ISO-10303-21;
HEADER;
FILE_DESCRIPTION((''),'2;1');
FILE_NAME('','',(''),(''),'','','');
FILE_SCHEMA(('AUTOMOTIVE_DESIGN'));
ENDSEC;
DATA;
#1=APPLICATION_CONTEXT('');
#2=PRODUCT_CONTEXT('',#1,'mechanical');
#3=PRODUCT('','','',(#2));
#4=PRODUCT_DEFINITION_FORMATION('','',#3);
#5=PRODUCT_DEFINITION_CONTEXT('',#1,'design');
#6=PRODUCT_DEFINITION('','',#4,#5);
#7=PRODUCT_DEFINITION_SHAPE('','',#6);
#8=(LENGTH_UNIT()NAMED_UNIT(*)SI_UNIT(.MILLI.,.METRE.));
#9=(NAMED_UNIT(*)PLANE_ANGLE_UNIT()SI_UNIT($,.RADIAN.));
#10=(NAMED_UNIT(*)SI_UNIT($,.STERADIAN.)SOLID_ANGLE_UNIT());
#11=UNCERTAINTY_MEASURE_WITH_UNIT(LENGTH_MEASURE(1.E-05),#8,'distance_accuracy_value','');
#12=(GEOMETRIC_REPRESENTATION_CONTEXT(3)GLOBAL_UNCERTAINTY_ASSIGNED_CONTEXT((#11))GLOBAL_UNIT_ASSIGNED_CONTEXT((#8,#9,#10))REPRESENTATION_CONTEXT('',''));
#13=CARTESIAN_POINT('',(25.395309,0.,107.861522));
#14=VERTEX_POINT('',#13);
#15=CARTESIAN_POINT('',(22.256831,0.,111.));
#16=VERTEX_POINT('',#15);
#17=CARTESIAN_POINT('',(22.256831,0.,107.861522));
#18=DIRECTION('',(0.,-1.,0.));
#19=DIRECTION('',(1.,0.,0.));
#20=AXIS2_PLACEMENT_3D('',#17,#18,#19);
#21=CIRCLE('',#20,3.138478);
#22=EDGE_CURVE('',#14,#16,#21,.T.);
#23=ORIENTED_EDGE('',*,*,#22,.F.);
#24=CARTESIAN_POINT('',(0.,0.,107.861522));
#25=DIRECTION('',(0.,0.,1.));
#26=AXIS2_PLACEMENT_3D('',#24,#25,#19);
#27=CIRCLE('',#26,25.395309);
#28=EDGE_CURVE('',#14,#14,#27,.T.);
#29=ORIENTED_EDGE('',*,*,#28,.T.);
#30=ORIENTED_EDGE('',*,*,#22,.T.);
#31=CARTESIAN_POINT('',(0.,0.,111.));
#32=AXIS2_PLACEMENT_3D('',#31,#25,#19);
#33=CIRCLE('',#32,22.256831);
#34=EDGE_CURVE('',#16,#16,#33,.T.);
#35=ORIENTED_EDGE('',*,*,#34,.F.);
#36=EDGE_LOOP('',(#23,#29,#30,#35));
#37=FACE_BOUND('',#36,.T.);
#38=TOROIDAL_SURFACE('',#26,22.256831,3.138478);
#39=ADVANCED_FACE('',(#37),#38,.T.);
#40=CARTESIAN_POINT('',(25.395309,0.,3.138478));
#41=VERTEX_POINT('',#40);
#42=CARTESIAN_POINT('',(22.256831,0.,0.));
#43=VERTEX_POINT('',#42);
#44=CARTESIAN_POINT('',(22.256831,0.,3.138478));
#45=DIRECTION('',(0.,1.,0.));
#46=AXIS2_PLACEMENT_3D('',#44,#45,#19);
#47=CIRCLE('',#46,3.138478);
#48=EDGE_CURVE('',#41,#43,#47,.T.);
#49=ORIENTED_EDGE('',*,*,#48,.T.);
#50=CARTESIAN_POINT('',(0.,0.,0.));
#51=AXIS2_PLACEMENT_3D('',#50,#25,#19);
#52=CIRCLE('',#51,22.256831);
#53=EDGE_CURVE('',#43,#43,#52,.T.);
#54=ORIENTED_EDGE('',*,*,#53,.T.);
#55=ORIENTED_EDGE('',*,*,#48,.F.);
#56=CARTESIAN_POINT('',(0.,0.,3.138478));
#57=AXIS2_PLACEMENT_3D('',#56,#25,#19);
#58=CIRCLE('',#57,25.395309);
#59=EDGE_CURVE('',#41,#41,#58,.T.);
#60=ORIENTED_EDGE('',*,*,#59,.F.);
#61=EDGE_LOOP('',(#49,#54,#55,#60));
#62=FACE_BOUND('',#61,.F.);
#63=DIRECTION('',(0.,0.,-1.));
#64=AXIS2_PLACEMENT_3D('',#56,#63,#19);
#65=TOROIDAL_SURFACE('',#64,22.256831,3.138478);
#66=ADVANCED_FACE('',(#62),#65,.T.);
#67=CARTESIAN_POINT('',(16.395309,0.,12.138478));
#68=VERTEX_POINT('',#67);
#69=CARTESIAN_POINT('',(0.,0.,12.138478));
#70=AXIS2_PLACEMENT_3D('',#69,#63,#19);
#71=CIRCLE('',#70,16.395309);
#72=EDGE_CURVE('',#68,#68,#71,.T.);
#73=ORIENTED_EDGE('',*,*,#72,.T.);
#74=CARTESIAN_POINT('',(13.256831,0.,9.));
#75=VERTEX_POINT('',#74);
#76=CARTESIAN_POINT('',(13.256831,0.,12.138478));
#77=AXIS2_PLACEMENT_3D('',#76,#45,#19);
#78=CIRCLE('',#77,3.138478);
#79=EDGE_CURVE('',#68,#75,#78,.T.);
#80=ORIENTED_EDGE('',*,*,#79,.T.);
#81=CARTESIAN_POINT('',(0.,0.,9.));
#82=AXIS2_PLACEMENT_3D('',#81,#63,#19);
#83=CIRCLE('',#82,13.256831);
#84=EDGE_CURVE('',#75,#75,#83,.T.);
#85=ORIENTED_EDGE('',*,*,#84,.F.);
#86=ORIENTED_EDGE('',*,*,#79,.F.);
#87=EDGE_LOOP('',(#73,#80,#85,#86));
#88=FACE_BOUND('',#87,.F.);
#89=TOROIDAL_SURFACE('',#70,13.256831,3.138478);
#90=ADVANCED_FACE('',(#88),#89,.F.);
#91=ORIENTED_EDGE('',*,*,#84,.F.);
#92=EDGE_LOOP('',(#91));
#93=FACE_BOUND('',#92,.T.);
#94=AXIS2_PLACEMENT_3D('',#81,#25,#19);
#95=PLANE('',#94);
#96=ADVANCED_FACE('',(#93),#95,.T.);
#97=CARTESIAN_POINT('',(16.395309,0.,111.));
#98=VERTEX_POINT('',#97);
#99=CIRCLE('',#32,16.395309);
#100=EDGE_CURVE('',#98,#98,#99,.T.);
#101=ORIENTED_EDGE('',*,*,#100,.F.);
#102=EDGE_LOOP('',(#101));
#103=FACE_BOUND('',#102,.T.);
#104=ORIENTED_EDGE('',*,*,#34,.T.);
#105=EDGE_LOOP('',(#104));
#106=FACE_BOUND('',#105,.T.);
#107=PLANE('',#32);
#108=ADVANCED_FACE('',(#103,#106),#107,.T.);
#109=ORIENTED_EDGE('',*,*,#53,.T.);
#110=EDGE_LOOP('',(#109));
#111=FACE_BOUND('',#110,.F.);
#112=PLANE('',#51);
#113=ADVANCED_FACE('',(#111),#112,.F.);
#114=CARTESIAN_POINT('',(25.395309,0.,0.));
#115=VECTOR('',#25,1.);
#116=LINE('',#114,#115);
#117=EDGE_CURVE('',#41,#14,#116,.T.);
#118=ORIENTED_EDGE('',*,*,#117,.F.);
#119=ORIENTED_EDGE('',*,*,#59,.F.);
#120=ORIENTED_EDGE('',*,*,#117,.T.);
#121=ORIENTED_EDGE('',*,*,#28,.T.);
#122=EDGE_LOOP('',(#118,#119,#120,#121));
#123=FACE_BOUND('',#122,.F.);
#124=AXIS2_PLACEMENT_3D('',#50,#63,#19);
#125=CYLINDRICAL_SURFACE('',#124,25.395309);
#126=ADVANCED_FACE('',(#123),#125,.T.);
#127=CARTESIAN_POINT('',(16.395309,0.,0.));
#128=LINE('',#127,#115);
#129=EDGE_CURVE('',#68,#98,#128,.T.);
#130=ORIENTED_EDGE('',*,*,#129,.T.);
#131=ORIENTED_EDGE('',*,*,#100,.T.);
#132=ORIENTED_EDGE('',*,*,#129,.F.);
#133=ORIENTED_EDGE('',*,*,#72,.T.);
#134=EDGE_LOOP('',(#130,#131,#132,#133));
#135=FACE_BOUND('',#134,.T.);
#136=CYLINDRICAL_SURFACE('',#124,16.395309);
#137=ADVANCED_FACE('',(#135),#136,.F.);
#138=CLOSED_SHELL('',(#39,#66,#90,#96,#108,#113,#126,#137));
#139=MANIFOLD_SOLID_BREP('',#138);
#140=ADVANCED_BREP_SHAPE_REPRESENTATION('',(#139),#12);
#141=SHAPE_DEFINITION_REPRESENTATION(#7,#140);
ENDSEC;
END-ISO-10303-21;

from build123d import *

# Parameters (mm, degrees)
F0_R     = 25.3953088791
F1_DEPTH = 111
F2_T     = -9
F3_R     = 3.1384776311


with BuildPart() as f1:
    # F0 (on Top) → F1 (new body)
    with BuildSketch(Plane.XY):
        Circle(F0_R)
    extrude(amount=F1_DEPTH)

    # F2
    f2_openings = [f1.faces().sort_by_distance(p)[0] for p in [
        (0, 0, 111),
    ]]
    offset(amount=F2_T, openings=f2_openings)

    # F3
    f3_edges = [f1.edges().sort_by_distance(p)[0] for p in [
        (25.395309, 0, 55.5),
        (-25.395309, 0, 0),
        (-25.395309, 0, 111),
        (-16.395309, 0, 9),
    ]]
    fillet(f3_edges, radius=F3_R)


solid = f1.part
